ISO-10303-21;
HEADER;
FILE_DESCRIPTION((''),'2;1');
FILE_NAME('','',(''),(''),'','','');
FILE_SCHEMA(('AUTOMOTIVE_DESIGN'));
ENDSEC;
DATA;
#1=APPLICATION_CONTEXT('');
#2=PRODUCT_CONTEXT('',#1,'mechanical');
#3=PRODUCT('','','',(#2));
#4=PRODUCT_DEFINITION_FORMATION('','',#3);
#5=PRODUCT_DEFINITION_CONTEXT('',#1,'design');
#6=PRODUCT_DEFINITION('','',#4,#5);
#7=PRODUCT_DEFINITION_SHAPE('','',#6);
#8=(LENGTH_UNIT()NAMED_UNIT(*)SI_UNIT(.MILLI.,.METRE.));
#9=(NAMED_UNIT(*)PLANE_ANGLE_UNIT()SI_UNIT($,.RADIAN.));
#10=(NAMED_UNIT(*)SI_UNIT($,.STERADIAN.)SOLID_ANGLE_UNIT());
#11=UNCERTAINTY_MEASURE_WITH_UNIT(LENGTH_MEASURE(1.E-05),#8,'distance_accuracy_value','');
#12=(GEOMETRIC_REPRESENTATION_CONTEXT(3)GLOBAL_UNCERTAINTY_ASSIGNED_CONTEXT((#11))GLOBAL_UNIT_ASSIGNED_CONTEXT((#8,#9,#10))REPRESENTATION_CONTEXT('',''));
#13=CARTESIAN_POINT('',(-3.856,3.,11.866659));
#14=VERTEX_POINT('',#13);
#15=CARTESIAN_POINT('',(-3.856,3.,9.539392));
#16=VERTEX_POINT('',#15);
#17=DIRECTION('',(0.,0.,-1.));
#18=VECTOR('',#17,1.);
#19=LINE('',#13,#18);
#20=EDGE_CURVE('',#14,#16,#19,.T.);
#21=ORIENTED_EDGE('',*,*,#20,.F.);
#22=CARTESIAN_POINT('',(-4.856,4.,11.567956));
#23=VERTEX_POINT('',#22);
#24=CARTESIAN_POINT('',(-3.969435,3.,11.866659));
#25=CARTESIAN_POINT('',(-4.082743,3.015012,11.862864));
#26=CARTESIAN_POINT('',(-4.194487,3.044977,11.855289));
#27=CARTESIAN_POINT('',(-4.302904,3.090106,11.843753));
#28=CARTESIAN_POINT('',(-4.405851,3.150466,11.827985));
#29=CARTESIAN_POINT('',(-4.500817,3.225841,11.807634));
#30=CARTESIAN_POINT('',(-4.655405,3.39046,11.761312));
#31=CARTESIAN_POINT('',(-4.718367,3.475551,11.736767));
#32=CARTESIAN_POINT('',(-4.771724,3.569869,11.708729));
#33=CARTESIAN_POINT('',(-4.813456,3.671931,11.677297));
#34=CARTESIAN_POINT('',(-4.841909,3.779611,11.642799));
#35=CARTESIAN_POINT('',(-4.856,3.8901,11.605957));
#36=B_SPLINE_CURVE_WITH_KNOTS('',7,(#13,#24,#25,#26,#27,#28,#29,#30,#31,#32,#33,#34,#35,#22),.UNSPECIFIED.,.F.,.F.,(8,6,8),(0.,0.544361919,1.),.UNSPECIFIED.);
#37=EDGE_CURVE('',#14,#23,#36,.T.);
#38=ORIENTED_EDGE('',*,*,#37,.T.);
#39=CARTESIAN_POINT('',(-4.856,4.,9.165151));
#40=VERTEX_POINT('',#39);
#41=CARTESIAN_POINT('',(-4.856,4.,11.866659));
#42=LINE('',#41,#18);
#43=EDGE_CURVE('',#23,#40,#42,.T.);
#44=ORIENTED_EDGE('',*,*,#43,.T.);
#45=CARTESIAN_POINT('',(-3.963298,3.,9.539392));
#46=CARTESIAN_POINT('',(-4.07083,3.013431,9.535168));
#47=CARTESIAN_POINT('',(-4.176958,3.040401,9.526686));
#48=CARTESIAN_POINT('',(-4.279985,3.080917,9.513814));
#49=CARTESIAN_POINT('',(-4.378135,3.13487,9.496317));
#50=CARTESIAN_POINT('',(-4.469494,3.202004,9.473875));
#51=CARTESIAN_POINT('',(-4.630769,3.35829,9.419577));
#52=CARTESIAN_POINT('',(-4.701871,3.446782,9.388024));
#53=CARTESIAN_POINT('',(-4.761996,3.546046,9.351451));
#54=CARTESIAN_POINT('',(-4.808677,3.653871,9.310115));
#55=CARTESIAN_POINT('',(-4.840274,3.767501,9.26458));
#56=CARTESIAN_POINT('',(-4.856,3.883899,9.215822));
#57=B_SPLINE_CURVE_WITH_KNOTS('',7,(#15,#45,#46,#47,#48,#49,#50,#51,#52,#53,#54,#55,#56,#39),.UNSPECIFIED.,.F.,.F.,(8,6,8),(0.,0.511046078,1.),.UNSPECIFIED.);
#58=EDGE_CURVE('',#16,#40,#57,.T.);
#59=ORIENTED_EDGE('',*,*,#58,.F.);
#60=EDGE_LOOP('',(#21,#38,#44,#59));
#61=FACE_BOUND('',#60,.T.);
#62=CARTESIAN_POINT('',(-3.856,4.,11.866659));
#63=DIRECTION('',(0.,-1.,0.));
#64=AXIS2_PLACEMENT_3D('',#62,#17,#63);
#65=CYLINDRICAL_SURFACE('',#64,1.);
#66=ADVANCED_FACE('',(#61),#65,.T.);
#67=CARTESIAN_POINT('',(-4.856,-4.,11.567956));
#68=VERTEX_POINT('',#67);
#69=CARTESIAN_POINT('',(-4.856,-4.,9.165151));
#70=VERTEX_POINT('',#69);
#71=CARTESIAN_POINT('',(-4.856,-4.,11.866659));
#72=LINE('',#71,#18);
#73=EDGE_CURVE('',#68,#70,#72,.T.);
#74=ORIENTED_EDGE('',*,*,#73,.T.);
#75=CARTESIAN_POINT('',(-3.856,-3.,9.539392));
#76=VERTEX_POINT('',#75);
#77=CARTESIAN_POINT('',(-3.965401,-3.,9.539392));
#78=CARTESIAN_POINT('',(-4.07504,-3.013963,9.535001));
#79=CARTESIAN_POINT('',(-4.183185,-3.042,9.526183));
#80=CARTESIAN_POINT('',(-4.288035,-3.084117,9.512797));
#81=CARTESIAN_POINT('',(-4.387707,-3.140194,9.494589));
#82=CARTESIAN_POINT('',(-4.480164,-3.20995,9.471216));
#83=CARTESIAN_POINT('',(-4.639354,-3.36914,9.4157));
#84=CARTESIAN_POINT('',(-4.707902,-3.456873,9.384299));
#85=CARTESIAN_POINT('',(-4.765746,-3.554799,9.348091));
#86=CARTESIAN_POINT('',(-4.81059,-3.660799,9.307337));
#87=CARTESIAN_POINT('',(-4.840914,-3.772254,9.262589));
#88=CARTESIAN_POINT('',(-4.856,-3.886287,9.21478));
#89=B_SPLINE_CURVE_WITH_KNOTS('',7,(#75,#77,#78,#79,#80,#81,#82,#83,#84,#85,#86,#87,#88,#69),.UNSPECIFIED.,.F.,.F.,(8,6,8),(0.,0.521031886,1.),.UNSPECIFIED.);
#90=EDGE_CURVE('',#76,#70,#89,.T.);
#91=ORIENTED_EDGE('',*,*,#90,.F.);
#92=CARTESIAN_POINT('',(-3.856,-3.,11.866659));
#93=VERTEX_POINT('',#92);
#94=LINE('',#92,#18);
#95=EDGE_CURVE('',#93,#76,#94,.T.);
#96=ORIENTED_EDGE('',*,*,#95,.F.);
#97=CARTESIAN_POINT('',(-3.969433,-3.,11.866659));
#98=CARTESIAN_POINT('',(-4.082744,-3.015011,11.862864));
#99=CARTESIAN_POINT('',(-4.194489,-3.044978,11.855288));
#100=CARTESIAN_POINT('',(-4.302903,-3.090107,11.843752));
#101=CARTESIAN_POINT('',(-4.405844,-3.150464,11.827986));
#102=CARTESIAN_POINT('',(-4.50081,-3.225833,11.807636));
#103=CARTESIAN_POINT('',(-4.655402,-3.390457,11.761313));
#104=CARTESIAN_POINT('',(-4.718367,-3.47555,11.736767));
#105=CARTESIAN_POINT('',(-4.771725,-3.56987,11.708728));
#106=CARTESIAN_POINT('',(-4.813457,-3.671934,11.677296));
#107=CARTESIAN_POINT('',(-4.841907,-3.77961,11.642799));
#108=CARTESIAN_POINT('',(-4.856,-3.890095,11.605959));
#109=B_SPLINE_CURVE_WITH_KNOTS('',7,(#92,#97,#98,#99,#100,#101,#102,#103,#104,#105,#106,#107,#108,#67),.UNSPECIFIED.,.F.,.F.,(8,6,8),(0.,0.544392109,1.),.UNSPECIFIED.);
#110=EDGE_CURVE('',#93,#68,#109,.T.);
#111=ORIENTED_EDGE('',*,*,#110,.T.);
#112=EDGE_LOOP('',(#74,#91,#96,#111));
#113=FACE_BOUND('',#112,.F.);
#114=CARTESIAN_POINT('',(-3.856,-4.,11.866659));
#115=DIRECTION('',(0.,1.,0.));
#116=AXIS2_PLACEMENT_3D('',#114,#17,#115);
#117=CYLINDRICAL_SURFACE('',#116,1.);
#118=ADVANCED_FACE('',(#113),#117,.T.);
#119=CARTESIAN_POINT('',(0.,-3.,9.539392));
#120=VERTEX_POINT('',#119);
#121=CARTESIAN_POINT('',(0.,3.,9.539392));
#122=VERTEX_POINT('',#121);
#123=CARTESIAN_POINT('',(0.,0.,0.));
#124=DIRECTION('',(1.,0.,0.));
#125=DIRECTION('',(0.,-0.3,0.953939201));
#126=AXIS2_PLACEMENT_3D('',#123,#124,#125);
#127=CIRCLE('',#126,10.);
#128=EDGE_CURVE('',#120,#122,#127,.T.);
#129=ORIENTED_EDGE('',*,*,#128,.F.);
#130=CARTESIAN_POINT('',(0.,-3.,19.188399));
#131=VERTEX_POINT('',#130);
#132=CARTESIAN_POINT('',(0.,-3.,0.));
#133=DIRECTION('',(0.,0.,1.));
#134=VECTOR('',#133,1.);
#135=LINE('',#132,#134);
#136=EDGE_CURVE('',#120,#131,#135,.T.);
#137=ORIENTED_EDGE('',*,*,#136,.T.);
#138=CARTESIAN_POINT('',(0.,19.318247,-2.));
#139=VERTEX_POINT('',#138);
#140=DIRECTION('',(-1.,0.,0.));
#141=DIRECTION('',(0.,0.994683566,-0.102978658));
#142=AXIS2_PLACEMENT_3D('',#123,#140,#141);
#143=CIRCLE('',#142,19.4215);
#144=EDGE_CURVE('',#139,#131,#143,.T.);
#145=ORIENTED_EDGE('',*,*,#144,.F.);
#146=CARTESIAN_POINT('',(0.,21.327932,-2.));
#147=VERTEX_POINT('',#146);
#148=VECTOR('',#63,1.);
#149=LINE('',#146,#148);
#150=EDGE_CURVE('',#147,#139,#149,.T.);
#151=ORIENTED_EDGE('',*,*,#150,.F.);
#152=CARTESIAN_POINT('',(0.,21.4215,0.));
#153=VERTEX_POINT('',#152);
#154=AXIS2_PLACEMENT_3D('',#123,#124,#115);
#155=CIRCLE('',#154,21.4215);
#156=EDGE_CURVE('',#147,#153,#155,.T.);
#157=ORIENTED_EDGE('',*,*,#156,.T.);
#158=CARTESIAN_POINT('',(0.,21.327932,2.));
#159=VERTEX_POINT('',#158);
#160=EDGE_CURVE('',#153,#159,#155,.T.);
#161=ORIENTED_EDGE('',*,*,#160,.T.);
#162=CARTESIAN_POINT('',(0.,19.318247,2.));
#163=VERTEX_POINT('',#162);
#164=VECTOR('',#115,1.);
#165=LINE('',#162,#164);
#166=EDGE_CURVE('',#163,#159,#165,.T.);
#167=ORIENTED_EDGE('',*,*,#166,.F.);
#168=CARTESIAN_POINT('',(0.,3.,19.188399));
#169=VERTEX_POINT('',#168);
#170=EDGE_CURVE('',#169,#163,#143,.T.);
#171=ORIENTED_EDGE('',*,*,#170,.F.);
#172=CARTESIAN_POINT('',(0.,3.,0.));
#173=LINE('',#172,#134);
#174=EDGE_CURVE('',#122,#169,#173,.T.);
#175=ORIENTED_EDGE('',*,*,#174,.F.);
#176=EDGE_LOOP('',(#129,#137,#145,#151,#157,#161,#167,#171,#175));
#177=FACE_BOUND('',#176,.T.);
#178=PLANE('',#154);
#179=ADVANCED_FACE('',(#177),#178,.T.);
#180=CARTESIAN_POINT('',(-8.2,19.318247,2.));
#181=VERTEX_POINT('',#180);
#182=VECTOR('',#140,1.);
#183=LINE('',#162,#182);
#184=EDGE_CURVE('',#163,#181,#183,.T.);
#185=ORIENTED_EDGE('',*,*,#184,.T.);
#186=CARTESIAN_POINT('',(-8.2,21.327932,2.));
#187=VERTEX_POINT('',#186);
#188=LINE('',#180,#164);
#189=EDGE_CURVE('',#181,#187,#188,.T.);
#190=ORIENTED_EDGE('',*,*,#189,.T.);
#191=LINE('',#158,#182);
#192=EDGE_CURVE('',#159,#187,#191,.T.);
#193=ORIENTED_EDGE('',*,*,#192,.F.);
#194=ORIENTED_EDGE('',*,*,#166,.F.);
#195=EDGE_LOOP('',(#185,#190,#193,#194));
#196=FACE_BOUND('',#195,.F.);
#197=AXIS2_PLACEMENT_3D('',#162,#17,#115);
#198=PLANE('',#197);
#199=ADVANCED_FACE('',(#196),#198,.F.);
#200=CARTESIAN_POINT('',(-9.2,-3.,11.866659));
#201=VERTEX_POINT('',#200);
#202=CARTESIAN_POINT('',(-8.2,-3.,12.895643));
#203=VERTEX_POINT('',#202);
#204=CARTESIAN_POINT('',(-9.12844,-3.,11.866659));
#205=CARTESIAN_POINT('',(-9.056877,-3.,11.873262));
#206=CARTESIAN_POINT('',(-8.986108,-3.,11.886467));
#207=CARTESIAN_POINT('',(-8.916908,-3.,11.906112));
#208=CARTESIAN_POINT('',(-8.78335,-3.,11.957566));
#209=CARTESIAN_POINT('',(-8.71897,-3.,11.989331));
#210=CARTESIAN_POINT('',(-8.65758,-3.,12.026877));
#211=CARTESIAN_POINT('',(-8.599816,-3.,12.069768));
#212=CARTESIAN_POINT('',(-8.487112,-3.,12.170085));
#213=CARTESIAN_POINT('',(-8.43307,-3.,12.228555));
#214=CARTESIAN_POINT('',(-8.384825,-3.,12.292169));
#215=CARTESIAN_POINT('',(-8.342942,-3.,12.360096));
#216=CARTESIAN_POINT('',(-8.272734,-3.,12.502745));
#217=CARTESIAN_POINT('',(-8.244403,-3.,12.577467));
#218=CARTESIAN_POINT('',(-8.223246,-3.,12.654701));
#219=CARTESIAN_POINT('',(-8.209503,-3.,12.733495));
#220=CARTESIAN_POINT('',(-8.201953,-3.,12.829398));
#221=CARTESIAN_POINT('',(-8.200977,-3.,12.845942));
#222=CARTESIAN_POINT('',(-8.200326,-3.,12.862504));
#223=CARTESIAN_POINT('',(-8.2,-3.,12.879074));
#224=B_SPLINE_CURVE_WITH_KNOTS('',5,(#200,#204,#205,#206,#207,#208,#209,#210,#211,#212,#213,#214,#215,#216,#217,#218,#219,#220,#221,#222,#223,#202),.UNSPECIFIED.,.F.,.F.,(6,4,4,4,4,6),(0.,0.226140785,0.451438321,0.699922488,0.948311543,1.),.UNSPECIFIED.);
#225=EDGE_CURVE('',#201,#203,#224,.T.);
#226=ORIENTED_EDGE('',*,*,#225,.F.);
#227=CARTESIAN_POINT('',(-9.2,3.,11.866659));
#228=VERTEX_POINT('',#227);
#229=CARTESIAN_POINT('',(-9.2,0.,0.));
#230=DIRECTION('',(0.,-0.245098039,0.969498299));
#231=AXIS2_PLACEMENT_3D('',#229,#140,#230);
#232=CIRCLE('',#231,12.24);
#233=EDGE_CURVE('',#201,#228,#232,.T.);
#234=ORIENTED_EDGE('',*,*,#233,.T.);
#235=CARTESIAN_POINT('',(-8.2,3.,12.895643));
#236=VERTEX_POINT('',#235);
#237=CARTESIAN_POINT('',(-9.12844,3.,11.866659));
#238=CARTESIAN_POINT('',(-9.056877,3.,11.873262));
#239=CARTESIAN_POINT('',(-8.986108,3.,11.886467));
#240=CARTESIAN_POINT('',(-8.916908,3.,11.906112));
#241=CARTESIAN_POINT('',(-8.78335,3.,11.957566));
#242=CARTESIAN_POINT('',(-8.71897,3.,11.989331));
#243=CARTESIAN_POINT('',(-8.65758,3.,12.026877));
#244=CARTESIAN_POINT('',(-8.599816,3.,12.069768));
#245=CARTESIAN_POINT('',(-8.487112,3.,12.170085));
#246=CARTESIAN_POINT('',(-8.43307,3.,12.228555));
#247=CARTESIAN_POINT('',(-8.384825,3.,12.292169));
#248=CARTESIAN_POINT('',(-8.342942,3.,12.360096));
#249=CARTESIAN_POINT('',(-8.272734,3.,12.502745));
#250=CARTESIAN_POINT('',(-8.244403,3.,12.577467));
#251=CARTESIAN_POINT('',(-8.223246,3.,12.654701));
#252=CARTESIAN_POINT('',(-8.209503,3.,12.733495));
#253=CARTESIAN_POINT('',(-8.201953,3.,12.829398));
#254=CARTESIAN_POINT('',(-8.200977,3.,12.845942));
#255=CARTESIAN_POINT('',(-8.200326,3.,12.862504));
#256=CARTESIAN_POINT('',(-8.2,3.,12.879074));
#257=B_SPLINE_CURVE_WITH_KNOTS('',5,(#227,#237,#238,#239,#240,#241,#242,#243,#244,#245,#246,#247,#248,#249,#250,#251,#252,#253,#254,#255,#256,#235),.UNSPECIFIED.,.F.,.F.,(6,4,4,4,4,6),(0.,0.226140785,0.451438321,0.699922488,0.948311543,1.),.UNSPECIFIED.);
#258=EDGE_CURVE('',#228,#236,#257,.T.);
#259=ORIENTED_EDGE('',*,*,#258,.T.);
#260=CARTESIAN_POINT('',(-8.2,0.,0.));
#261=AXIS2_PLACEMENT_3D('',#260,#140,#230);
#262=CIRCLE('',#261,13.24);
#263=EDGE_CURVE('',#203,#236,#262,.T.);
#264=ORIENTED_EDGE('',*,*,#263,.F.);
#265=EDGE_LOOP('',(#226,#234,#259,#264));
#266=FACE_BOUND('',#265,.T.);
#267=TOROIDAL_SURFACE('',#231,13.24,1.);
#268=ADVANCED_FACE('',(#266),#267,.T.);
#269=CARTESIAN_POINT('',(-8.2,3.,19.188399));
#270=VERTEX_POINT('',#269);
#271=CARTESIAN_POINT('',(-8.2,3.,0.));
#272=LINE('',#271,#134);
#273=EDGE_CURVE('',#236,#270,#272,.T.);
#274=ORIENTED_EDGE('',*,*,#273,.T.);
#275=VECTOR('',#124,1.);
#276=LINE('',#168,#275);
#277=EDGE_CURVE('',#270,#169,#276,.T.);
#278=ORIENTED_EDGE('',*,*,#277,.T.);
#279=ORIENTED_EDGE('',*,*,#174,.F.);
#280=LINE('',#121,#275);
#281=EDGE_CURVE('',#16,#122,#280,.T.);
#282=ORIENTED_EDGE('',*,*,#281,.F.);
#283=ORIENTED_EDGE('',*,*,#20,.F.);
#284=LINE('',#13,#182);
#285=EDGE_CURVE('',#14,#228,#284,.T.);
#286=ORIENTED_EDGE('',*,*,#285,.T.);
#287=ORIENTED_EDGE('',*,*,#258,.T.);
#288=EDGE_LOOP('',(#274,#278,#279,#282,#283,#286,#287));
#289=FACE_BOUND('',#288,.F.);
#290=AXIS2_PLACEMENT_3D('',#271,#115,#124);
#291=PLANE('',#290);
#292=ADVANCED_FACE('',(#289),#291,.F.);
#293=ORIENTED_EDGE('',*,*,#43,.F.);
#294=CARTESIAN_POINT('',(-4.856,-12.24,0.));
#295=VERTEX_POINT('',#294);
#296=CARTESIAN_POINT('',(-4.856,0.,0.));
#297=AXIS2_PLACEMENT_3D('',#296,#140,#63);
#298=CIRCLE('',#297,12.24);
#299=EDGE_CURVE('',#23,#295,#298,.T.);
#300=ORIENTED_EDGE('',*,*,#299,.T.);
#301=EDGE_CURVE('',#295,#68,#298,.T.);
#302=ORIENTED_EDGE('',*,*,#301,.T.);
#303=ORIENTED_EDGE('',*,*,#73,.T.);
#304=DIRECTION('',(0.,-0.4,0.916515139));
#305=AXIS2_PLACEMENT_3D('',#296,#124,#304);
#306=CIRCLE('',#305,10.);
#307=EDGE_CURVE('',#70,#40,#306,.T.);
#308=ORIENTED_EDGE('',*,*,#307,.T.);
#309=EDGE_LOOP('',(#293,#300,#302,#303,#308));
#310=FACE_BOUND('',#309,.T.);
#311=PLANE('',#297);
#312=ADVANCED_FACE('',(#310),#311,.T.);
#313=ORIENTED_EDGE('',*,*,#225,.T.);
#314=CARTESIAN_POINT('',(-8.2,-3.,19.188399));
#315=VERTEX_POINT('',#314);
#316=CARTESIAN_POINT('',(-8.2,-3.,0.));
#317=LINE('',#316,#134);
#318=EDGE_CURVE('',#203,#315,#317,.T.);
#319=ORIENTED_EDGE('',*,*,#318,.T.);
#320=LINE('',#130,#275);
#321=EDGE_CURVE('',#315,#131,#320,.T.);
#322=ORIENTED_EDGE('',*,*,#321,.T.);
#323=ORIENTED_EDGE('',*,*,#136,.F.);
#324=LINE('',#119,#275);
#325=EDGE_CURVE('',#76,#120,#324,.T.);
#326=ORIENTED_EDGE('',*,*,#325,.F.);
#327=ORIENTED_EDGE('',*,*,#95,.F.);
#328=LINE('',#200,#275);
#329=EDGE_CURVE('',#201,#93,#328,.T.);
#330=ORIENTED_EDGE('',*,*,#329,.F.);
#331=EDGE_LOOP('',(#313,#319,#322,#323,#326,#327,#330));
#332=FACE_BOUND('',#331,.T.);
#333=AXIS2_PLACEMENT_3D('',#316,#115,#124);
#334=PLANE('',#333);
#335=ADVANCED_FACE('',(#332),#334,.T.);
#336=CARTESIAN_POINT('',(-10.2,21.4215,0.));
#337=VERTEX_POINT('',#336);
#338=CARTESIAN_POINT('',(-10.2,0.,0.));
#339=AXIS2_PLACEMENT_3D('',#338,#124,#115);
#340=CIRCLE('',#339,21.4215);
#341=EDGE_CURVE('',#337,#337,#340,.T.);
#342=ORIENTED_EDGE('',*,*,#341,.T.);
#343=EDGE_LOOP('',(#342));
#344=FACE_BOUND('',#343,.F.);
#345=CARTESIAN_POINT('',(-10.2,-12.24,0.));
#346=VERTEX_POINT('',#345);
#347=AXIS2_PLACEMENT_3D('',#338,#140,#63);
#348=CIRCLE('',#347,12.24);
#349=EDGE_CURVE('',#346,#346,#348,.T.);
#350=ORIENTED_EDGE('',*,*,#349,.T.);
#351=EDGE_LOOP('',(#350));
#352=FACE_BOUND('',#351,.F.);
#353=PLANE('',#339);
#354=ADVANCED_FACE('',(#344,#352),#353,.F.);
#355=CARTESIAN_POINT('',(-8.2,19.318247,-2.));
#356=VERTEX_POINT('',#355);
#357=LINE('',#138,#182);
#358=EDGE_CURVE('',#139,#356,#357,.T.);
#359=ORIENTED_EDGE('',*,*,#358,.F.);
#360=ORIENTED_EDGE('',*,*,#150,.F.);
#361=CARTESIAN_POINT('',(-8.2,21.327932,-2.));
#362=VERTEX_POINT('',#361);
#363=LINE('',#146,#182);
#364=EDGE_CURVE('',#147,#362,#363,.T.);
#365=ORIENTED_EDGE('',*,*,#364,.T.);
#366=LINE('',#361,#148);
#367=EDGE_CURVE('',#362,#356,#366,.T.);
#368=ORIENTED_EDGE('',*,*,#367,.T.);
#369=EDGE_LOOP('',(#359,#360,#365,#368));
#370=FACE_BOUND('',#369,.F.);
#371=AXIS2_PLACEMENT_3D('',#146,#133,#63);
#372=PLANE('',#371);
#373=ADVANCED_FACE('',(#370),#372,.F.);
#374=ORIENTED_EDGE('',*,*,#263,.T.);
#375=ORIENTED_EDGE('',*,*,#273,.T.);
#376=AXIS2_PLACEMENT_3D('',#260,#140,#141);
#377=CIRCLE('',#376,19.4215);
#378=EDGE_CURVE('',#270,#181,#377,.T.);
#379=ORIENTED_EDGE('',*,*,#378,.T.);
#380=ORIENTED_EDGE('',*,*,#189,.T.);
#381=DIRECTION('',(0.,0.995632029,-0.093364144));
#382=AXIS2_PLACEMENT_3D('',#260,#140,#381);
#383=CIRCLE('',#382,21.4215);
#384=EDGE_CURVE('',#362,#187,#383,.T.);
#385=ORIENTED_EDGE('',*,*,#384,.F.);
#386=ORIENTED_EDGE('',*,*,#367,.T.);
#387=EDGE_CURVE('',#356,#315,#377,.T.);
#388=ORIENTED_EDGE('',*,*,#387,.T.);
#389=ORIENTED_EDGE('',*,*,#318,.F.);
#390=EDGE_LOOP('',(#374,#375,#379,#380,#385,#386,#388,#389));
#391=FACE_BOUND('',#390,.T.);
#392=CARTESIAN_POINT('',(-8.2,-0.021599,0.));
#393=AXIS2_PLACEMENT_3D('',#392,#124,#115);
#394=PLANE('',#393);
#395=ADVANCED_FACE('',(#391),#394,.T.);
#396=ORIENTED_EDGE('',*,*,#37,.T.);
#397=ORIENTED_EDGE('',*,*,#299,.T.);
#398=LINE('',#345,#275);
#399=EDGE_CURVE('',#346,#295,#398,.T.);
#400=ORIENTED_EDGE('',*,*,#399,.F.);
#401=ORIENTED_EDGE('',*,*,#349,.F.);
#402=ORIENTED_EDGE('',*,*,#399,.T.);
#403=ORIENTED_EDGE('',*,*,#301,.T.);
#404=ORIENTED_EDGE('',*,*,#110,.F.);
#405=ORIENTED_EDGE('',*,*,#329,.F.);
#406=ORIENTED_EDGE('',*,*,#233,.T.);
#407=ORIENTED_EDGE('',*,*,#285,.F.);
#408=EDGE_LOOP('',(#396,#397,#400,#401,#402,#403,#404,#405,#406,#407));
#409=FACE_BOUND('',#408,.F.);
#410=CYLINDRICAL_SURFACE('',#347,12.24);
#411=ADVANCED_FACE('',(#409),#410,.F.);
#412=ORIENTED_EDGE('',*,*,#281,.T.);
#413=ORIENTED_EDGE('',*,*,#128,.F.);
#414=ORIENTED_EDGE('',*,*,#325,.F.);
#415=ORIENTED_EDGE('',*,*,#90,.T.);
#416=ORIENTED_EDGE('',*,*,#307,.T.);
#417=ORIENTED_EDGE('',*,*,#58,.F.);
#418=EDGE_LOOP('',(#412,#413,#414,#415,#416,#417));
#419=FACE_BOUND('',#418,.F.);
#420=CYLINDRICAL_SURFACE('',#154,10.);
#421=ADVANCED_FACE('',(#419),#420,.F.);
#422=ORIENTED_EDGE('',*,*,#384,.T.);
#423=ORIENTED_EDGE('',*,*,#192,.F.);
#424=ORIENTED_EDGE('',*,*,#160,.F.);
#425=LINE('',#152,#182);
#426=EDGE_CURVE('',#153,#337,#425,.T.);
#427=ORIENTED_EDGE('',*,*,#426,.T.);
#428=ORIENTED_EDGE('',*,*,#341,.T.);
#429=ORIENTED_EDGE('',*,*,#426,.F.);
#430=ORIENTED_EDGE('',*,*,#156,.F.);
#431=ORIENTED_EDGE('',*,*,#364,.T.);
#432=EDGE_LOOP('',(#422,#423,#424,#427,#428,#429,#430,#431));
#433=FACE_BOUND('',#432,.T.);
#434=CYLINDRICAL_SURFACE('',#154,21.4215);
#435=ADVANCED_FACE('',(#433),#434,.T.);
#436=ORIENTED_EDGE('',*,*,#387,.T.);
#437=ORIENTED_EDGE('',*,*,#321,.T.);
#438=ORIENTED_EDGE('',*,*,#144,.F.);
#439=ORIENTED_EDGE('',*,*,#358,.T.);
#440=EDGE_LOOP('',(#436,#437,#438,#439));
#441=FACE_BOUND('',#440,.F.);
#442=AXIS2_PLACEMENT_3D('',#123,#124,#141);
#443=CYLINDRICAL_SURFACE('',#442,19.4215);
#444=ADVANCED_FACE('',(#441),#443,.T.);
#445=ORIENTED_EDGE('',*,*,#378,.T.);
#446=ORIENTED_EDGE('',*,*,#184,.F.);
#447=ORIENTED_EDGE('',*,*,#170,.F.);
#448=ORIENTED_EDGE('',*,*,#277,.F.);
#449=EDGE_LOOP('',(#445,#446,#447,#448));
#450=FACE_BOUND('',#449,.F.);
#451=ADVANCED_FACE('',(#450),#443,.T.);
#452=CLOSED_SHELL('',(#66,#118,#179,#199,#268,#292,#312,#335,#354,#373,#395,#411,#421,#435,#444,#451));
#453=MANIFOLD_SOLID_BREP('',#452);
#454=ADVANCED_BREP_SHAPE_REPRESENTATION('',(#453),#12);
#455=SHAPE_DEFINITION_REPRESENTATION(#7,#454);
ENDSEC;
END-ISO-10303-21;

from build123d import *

# Parameters (mm, degrees)
F0_R      = 21.4215
F1_DEPTH  = 10.2
F3_DEPTH  = 8.2
F4_R      = 12.24
F5_DEPTH  = 5.344
F6_W      = 8.2
F6_H      = 6
F7_DEPTH  = 25
F8_R      = 1
F9_R      = 10
F10_DEPTH = 6


with BuildPart() as f1:
    # F0 (on Right) → F1 (new body)
    with BuildSketch(Plane.YZ):
        Circle(F0_R)
    extrude(amount=-F1_DEPTH)

    # F2 (on face) → F3 (cut)
    with BuildSketch(Plane.YZ):
        with BuildLine():
            ThreePointArc((19.3182468731, -2), (-19.4215, 0), (19.3182468731, 2))
            Line((19.3182468731, 2), (21.3279315043, 2))
            ThreePointArc((21.3279315043, 2), (-21.4215, 0), (21.3279315043, -2))
            Line((21.3279315043, -2), (19.3182468731, -2))
        make_face()
    extrude(amount=-F3_DEPTH, mode=Mode.SUBTRACT)

    # F4 (on face) → F5 (cut)
    with BuildSketch(Plane(origin=(-10.2, 0, 0), x_dir=(0, -1, 0), z_dir=(-1, 0, 0))):
        Circle(F4_R)
    extrude(amount=-F5_DEPTH, mode=Mode.SUBTRACT)

    # F6 (on Top) → F7 (cut)
    with BuildSketch(Plane.XY):
        with Locations((-4.1, 0)):
            Rectangle(F6_W, F6_H)
    extrude(amount=F7_DEPTH, mode=Mode.SUBTRACT)

    # F8
    f8_edges = [f1.edges().sort_by_distance(p)[0] for p in [
        (-4.856, 3, 5.93333),
        (-4.856, -3, 5.93333),
        (-8.2, 0, 12.24),
    ]]
    fillet(f8_edges, radius=F8_R)

    # F9 (on face) → F10 (cut)
    with BuildSketch(Plane.YZ):
        Circle(F9_R)
    extrude(amount=-F10_DEPTH, mode=Mode.SUBTRACT)


solid = f1.part
